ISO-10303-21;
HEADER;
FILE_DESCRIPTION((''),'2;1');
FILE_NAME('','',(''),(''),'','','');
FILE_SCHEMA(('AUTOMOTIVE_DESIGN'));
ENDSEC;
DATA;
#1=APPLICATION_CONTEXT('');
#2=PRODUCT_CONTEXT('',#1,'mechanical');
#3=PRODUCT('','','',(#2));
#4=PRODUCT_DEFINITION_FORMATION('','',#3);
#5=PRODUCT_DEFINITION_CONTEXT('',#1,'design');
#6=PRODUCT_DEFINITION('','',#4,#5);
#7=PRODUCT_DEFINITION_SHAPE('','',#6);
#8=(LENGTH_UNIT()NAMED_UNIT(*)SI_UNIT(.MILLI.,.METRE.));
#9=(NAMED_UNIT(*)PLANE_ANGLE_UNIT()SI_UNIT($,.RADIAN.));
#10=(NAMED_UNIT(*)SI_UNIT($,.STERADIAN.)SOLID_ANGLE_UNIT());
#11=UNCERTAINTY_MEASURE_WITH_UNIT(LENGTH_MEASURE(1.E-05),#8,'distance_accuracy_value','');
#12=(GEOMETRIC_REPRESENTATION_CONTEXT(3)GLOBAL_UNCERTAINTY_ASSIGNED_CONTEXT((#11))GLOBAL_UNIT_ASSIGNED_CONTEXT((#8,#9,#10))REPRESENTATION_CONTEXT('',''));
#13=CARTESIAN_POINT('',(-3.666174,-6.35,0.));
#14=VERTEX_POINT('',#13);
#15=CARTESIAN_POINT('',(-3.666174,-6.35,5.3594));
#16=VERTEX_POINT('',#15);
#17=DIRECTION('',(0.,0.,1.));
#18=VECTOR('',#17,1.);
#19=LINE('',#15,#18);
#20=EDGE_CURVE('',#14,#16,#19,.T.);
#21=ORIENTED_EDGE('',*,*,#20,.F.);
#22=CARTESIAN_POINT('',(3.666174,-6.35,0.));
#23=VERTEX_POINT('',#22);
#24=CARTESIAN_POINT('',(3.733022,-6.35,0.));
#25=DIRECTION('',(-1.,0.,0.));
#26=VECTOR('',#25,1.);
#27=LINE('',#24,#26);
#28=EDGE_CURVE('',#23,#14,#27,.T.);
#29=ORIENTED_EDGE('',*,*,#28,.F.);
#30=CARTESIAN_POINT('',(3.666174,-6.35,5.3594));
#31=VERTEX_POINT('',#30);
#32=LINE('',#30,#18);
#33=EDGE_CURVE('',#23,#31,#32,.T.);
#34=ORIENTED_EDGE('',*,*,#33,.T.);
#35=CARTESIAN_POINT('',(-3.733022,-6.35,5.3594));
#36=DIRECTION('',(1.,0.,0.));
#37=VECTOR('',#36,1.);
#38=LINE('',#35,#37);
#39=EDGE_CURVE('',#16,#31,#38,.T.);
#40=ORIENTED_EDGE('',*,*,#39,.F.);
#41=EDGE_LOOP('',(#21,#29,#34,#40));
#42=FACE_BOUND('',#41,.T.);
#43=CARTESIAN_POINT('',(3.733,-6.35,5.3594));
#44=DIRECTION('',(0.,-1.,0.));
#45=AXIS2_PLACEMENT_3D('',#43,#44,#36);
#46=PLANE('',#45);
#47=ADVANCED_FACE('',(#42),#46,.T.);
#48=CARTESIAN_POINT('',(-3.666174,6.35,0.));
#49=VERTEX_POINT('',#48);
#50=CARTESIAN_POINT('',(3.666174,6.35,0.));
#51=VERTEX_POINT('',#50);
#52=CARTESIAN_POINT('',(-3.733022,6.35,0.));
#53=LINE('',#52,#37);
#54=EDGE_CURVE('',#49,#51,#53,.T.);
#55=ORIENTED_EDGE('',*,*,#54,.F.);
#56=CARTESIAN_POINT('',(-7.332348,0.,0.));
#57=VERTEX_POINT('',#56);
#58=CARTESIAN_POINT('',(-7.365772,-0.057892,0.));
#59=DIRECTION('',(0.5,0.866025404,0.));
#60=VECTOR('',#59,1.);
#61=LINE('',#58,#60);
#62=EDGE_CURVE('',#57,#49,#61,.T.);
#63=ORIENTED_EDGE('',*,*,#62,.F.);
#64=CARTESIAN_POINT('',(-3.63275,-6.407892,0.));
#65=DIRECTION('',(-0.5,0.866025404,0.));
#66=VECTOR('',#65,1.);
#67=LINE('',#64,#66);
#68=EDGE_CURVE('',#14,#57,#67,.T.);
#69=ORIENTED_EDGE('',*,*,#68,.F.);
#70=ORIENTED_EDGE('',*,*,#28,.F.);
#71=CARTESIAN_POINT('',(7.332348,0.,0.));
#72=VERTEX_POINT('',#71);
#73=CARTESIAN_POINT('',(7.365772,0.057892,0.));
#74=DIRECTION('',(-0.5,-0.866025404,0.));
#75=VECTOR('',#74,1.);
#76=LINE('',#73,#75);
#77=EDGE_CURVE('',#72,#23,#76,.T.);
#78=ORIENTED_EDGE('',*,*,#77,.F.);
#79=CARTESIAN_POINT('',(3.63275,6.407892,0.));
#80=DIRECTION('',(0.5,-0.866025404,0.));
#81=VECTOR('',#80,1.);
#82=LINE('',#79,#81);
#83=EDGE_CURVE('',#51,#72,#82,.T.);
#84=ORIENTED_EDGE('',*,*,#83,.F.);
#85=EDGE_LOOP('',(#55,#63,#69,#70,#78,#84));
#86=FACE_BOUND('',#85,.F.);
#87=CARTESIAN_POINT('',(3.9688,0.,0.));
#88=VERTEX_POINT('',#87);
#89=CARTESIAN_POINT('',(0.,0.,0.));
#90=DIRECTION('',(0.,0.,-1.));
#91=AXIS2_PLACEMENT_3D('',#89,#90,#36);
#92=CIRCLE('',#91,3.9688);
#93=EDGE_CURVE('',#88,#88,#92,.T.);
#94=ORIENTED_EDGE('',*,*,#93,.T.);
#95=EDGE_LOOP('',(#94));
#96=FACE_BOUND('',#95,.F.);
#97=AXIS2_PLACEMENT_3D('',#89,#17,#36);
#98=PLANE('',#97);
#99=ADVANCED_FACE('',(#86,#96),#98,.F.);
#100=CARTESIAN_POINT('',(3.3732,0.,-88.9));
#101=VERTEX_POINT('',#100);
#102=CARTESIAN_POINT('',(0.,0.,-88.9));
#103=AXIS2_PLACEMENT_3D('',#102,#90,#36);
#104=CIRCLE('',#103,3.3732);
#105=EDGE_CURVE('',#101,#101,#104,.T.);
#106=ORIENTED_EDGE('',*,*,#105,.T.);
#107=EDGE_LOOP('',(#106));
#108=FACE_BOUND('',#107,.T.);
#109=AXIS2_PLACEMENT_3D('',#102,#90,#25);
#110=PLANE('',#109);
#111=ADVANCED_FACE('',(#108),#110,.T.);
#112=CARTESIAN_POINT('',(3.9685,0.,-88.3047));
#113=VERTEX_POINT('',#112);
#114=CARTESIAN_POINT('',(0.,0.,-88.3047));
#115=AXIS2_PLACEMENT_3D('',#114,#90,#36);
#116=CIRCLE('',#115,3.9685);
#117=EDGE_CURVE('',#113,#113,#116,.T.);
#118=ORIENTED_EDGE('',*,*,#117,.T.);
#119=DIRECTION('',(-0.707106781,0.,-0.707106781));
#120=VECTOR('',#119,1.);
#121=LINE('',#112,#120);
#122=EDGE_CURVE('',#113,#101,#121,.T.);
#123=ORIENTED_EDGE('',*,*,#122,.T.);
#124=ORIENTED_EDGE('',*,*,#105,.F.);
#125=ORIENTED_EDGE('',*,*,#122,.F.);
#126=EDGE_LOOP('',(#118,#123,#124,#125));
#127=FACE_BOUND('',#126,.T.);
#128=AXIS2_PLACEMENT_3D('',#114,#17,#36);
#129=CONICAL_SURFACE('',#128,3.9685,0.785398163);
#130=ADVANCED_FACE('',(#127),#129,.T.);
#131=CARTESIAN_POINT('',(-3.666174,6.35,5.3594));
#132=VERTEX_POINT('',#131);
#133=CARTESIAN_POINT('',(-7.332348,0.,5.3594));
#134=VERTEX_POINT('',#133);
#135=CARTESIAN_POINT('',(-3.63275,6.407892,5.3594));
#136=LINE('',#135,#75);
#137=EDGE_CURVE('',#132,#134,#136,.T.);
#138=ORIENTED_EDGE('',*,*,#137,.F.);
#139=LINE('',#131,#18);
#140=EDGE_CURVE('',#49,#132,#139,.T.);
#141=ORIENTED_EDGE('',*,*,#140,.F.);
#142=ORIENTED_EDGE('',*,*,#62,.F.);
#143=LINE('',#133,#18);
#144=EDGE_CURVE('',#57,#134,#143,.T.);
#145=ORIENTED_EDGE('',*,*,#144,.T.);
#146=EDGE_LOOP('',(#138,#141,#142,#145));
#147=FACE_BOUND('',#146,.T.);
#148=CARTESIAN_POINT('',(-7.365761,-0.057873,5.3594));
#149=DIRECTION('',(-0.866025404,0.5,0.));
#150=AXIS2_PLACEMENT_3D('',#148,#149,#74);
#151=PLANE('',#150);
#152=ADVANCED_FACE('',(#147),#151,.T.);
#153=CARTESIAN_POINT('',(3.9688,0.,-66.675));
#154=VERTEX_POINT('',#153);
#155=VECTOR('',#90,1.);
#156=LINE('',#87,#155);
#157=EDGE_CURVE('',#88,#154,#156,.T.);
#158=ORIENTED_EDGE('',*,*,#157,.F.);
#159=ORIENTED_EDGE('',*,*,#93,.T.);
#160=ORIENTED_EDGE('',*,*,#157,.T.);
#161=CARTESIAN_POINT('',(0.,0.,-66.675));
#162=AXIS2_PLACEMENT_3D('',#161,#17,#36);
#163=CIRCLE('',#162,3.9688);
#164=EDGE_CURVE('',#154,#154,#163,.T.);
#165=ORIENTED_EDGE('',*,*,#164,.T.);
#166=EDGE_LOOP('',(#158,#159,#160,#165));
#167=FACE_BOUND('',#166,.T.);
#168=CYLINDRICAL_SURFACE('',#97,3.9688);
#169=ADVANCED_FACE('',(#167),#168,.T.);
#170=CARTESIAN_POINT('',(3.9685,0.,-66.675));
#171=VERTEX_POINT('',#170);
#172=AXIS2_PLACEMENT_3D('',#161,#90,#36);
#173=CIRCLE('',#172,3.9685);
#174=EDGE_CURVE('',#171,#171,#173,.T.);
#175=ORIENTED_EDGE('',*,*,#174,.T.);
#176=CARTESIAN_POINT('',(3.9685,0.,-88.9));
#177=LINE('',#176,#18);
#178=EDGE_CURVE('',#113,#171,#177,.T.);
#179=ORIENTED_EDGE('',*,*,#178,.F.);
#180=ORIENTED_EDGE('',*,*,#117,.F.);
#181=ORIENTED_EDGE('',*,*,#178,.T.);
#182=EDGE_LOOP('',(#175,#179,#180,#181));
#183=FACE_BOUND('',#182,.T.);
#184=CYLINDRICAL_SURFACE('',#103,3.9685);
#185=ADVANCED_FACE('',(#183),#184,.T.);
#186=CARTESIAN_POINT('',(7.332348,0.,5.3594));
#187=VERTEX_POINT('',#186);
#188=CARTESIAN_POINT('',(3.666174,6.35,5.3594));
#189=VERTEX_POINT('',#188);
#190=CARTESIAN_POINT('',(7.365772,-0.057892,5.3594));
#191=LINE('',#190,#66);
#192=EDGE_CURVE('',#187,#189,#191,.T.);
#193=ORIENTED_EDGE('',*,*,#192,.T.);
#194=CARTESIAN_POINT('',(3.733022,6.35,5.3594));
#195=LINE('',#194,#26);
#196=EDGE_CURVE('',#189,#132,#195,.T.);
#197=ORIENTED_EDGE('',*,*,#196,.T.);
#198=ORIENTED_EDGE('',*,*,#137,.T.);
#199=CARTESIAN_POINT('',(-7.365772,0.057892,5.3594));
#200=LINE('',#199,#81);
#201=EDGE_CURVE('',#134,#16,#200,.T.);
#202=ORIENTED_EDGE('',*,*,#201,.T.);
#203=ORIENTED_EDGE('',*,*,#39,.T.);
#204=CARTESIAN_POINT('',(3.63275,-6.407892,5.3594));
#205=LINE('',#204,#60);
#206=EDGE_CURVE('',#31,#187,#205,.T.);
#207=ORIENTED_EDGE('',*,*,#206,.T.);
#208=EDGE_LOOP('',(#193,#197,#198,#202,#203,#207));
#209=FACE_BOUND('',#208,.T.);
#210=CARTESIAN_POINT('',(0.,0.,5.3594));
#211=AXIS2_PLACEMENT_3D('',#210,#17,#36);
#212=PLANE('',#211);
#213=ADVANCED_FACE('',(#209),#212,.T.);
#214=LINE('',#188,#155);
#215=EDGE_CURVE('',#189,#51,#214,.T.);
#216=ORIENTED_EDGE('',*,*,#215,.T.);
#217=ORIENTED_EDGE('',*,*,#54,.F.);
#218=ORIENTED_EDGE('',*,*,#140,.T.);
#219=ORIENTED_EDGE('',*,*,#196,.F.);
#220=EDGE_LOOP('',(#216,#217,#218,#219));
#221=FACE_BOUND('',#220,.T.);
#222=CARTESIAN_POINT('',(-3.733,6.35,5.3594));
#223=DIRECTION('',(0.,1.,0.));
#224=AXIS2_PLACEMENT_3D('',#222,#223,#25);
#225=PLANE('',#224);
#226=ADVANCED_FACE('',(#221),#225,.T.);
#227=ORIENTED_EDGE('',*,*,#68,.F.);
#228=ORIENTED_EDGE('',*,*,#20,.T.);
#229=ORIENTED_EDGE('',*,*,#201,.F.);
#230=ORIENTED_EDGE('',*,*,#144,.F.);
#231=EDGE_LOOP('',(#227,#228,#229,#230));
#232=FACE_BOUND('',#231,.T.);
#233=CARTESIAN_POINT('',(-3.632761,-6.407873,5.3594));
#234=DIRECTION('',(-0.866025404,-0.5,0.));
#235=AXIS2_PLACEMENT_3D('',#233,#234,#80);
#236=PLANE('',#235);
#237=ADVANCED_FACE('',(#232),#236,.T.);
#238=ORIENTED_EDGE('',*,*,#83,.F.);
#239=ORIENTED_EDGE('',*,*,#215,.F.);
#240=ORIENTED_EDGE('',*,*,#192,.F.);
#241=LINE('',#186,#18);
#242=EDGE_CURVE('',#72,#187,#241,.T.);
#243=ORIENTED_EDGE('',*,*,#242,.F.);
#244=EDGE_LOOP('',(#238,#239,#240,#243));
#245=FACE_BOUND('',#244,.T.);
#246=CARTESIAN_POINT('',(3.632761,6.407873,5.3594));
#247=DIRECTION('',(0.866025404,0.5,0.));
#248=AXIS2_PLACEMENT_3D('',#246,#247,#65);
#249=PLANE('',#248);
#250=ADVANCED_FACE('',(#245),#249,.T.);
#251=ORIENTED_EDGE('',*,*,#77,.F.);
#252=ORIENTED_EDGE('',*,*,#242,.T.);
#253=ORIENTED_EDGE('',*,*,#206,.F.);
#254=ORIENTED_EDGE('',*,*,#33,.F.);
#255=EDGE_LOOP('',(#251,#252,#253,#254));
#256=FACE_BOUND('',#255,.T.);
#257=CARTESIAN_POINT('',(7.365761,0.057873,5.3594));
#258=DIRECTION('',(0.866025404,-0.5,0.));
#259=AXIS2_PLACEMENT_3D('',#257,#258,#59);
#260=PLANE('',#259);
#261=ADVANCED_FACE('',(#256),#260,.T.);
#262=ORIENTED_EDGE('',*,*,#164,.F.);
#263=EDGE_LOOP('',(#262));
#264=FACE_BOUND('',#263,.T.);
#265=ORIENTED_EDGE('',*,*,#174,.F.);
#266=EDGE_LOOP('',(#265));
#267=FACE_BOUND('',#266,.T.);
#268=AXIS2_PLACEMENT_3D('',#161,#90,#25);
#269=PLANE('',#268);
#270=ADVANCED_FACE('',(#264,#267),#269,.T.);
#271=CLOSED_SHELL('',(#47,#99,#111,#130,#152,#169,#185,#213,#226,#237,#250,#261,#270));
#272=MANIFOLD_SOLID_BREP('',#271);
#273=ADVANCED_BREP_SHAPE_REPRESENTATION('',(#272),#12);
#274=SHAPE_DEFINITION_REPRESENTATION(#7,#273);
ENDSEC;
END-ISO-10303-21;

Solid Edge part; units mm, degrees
sketch "Sketch1" plane through (0, 0, 0) normal (0, 0, 1) x (1, 0, 0)
  circle A0 centre (0, 0) radius 7.366
  dimension "D1" = 14.732
extrude "Protrusion1" add sketch "Sketch1" along normal blind 5.3594
sketch "Sketch2" plane through (0, 0, 0) normal (0, 0, -1) x (1, 0, 0)
  circle A0 centre (0, 0) radius 3.9688
extrude "Protrusion2" add sketch "Sketch2" along normal blind 88.9
sketch "Sketch3" plane through (0, 0, -88.9) normal (0, 0, -1) x (1, 0, 0)
  circle A0 centre (0, 0) radius 3.9685
extrude "Cutout1" cut sketch "Sketch3" against normal blind 22.225 flip side to cut
chamfer "Chamfer_1" distance 0.5953 angle 45 1 edges at (-3.9685, 0, -88.9)
sketch "Sketch4" plane through (0, 0, 5.3594) normal (0, 0, 1) x (1, 0, 0)
  line L0 (-3.733, 6.35) -> (3.733, 6.35)
  dimension "D1" = 12.7
extrude "Cutout2" cut sketch "Sketch4" against normal up to next material side at (0, 6.4, 5.3594)
pattern_circular "Pattern1" count 6 over 360 about axis through (0, 0, 5.3594) along (0, 0, 1) of "Cutout2"
properties part number "24100013"
